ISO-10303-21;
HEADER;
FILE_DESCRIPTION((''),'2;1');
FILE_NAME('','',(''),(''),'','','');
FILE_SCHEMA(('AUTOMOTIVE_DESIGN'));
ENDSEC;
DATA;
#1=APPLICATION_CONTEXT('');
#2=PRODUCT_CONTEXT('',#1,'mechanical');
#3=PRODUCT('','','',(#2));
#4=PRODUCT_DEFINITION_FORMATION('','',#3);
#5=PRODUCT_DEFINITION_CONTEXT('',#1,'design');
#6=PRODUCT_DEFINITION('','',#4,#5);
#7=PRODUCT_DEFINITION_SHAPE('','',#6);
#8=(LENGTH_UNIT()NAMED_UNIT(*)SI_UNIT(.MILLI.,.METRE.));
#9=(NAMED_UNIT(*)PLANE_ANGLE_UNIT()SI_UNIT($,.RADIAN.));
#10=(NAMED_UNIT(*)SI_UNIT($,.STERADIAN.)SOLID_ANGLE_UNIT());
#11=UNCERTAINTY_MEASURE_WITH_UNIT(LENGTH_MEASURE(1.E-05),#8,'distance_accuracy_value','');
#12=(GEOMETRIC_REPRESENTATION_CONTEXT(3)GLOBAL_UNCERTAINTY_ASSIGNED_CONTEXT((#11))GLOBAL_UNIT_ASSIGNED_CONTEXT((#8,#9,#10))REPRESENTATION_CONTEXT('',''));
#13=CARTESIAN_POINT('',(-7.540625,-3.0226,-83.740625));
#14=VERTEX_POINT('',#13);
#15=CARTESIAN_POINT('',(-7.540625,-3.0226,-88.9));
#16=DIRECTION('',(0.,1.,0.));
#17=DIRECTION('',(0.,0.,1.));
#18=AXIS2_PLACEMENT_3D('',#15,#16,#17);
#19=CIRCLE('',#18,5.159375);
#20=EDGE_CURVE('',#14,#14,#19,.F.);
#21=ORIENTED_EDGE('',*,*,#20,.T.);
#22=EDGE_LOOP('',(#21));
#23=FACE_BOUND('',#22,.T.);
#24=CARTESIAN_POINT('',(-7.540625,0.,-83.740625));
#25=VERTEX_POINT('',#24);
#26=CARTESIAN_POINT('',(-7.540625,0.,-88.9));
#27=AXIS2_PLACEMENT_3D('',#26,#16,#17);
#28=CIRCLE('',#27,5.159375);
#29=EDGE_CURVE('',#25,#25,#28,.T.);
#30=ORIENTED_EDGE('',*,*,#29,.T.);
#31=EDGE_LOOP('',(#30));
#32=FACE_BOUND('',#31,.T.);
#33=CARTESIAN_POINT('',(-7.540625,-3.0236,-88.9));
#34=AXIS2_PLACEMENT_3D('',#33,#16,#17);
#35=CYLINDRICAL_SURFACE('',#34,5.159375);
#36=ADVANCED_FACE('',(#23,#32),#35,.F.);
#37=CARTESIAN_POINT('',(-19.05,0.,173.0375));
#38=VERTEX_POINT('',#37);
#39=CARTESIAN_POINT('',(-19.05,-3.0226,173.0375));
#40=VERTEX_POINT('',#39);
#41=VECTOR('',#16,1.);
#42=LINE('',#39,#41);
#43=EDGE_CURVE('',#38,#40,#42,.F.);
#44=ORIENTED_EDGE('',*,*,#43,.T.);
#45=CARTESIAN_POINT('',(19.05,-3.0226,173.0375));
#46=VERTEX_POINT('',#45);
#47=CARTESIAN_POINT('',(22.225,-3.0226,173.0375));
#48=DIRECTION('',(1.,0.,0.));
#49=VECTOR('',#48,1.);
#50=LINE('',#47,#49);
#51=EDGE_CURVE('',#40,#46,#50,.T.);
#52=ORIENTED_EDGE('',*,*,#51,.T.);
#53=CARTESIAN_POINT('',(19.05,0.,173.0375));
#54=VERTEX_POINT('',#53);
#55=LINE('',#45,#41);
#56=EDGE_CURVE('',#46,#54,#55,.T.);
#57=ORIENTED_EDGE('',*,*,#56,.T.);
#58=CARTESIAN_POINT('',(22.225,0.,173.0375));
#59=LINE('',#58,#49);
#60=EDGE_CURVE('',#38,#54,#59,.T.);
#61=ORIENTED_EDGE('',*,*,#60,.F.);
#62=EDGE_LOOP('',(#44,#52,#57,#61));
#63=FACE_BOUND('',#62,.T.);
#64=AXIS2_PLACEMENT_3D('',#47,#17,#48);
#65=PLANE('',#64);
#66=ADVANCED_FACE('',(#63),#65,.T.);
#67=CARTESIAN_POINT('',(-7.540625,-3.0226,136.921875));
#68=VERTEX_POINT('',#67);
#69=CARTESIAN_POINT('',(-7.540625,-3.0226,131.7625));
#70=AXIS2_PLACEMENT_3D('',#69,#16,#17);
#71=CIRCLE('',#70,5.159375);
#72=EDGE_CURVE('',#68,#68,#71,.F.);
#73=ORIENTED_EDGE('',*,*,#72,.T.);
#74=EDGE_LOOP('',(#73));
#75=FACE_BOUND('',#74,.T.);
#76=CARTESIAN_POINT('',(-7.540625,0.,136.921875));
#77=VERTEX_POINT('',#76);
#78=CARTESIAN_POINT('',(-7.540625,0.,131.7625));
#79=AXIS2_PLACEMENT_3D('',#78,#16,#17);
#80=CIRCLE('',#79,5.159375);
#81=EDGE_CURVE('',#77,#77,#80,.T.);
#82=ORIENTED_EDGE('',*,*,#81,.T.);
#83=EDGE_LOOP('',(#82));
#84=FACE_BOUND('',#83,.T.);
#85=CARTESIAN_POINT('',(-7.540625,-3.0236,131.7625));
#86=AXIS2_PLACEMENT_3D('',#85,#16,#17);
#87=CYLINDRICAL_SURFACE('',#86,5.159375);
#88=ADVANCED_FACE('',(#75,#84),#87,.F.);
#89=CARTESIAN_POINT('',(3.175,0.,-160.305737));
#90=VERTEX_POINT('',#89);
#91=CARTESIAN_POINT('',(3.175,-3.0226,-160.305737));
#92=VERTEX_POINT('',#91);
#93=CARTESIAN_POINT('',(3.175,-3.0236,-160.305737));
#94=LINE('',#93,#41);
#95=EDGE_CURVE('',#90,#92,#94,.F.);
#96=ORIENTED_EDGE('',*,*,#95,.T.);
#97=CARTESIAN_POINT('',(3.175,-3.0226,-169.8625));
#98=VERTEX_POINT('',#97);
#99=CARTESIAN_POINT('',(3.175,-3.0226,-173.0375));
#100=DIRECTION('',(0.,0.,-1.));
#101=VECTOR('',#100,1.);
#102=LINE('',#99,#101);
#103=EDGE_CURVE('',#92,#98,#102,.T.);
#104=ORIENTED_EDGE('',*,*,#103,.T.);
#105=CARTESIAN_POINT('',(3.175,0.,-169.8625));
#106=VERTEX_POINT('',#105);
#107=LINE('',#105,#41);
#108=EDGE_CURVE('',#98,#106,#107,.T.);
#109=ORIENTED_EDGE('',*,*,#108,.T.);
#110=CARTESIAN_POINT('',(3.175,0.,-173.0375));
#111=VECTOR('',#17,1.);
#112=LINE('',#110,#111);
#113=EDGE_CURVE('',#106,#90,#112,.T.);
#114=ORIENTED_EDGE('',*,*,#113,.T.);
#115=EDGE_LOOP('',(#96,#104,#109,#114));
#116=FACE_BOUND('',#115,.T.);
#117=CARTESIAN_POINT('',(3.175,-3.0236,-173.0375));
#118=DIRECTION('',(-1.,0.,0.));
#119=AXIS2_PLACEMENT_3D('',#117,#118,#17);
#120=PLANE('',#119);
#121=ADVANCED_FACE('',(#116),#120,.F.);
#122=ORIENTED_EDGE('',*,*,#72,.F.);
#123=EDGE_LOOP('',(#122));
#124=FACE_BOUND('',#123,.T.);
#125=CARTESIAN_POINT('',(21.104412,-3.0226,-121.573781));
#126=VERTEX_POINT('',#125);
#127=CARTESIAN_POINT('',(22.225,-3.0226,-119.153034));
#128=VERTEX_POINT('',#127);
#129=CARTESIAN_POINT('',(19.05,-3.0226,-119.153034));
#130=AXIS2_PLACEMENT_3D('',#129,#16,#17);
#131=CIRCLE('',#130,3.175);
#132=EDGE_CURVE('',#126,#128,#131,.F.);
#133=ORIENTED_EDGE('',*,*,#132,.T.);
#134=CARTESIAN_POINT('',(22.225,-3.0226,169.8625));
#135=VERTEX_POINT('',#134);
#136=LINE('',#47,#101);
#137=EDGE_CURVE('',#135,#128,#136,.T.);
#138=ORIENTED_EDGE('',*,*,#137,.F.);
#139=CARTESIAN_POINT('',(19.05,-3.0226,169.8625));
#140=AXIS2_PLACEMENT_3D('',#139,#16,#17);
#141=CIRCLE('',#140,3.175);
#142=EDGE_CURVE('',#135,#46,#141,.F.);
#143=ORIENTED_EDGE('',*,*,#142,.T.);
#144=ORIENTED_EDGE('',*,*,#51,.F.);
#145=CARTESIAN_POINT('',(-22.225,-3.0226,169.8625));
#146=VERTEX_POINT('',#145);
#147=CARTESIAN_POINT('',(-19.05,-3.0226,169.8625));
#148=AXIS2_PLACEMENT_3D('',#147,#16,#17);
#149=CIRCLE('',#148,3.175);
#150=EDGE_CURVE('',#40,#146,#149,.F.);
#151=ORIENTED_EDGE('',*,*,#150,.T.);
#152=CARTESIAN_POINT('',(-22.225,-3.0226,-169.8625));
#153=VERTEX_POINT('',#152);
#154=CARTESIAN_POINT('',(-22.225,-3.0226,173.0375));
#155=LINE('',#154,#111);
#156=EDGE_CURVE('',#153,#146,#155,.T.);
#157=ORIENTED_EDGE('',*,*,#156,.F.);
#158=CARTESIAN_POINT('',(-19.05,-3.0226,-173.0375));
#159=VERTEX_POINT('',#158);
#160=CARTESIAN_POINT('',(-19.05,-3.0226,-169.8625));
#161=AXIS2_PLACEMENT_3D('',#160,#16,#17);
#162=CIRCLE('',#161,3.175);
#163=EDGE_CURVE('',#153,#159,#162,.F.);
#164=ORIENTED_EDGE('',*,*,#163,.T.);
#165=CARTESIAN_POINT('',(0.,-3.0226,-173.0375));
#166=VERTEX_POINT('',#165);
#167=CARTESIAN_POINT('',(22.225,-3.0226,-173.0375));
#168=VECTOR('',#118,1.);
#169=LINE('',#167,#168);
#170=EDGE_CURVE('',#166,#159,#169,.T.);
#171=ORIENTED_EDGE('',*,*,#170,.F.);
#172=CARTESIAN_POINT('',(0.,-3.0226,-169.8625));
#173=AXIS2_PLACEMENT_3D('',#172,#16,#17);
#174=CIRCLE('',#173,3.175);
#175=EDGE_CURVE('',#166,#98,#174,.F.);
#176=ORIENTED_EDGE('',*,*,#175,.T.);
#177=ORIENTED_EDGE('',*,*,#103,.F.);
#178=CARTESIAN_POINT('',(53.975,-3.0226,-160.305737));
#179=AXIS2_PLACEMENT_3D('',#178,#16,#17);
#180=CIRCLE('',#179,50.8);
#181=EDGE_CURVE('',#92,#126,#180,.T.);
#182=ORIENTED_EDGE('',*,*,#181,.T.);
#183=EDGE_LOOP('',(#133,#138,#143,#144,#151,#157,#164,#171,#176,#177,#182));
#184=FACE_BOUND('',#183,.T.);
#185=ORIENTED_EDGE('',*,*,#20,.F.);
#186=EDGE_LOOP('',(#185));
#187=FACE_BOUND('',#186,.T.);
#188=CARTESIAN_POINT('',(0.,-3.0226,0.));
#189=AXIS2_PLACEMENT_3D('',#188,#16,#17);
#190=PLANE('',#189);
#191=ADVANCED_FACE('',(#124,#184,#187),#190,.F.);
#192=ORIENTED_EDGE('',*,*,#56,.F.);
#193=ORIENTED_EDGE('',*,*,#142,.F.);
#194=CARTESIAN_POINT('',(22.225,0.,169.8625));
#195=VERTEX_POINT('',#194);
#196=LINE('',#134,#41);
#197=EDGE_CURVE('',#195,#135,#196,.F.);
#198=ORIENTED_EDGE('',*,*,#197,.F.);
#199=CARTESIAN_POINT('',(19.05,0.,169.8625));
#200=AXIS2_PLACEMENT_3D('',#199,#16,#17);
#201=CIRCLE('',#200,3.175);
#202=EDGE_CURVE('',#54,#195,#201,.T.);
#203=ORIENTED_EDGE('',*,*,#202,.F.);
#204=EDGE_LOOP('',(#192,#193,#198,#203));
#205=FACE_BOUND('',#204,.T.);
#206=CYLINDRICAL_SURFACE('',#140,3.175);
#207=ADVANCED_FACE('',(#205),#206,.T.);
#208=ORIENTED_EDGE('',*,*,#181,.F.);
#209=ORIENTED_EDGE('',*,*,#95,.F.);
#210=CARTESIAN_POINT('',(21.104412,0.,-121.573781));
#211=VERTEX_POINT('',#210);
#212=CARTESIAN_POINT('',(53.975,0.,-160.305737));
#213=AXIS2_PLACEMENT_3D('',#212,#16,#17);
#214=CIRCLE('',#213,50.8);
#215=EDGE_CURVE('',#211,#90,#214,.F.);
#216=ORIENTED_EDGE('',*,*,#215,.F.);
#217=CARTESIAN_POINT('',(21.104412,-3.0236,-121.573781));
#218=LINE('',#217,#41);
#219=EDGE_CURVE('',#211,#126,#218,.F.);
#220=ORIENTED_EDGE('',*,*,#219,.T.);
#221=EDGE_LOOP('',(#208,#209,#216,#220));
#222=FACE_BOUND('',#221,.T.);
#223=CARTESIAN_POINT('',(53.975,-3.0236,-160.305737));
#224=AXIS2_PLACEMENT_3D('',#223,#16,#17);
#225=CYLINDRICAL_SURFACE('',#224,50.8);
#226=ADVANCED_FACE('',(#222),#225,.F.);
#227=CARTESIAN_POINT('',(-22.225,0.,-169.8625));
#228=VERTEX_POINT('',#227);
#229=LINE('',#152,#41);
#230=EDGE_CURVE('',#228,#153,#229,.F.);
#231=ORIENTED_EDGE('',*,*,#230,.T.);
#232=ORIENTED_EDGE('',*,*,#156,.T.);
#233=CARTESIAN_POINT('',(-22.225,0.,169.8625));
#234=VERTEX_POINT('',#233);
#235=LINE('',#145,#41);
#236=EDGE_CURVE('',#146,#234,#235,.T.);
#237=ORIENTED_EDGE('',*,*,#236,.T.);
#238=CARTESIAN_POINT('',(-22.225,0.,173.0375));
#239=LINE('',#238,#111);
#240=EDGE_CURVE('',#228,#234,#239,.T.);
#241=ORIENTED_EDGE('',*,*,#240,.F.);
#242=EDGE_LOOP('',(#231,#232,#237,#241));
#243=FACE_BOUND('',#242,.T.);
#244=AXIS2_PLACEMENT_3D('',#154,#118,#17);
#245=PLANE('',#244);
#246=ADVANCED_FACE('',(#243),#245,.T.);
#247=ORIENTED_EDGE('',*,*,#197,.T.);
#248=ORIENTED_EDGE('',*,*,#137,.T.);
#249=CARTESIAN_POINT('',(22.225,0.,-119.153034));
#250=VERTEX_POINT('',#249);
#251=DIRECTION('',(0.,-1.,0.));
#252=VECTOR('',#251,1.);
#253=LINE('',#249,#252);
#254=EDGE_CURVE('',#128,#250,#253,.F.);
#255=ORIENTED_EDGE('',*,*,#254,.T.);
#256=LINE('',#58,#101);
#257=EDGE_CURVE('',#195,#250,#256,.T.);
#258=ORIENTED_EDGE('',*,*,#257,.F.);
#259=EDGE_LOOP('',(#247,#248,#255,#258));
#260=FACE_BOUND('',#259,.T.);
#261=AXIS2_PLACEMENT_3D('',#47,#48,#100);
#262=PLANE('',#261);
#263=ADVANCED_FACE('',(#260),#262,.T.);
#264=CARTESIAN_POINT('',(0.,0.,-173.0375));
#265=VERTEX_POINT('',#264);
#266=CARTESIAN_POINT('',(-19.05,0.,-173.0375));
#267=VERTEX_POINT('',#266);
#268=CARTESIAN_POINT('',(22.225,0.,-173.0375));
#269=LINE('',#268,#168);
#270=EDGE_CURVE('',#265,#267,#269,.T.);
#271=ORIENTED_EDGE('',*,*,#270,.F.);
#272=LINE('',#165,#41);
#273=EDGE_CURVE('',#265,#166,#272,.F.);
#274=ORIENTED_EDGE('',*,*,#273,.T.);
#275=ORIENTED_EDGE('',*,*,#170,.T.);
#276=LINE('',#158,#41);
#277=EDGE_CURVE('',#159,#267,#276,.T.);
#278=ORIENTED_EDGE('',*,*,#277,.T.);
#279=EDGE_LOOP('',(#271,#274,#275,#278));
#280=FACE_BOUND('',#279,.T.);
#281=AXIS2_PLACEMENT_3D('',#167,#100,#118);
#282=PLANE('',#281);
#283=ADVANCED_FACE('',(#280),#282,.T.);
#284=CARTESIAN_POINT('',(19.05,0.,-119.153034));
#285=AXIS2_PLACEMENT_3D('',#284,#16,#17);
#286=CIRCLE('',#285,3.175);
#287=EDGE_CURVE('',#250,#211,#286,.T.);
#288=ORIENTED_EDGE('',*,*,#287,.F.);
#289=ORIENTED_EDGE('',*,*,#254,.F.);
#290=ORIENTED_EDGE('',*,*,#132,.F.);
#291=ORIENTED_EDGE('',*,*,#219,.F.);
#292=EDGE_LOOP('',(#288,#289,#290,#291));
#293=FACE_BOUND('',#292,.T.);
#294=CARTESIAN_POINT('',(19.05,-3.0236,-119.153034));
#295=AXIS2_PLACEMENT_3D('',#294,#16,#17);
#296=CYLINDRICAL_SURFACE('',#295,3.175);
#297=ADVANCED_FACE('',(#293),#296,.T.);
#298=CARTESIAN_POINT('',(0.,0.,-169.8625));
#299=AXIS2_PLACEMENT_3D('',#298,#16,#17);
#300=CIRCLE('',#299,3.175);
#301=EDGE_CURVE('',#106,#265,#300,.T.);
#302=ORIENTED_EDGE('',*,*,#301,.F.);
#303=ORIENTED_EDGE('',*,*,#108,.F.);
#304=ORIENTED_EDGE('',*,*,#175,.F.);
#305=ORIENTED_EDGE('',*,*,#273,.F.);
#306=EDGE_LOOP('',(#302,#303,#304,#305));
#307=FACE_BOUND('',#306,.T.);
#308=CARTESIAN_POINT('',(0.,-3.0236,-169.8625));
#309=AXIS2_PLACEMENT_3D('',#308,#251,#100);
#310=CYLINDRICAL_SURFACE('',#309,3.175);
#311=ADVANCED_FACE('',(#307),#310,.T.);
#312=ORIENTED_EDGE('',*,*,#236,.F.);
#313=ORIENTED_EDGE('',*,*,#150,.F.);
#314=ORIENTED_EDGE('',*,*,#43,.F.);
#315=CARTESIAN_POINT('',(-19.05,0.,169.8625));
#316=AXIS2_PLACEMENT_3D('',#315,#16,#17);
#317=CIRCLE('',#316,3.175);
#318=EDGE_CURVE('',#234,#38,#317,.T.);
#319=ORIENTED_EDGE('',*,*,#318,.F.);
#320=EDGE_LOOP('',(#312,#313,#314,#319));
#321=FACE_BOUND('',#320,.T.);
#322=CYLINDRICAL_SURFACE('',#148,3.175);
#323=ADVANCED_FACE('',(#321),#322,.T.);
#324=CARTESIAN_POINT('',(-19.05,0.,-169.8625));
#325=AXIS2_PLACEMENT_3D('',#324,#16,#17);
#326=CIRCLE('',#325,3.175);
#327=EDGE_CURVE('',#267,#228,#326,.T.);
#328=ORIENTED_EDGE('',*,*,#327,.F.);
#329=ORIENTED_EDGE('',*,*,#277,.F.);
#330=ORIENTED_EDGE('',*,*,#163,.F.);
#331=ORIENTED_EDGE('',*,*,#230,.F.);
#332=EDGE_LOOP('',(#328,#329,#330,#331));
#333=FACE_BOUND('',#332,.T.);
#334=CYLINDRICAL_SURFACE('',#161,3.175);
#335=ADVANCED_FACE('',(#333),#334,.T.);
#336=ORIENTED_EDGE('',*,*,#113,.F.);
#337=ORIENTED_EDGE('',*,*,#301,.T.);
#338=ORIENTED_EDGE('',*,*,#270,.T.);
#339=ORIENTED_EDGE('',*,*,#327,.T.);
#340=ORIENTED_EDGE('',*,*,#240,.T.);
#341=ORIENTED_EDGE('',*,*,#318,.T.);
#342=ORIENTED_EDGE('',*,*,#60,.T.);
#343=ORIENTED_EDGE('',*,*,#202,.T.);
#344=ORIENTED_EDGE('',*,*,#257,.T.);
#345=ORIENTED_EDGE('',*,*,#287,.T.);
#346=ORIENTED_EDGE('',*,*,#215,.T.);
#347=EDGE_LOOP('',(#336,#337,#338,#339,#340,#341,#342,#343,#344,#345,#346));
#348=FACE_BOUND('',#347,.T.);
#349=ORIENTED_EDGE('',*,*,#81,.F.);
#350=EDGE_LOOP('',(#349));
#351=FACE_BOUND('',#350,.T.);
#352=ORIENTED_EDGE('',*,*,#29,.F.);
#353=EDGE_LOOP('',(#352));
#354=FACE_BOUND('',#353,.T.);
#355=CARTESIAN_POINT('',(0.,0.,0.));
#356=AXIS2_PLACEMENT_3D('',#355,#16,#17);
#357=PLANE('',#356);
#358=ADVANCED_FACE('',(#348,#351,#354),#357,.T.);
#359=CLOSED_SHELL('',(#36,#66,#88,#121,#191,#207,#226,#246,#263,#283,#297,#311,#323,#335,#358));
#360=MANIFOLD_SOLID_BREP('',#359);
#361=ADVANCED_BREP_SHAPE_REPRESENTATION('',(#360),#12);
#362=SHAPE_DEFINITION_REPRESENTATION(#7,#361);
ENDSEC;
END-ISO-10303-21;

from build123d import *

# Parameters (mm, degrees)
SKETCH1_W          = 44.45
SKETCH1_H          = 346.075
BASE_FLANGE1_DEPTH = 3.0226
CUT_EXTRUDE1_REACH = 176.485
SKETCH6_R          = 5.159375
SKETCH6_W          = 19.05
SKETCH6_H          = 52.3875
FILLET2_R          = 50.8
FILLET3_R          = 3.175


# Sheet-metal steps are written as plain solids
with BuildPart() as part:
    # Sketch1 → Base-Flange1 (new body)
    with BuildSketch(Plane(origin=(0, 0, 0), x_dir=(1, 0, 0), z_dir=(0, 1, 0))):
        Rectangle(SKETCH1_W, SKETCH1_H)
    extrude(amount=-BASE_FLANGE1_DEPTH)

    # Sketch6 → Cut-Extrude1 (cut, up to next)
    with BuildSketch(Plane(origin=(0, 0, 0), x_dir=(1, 0, 0), z_dir=(0, 1, 0)), mode=Mode.PRIVATE) as cut_extrude1_sk1:
        with Locations(Location((-7.540625, -131.7625, 0), (0, 0, 270))):
            Circle(SKETCH6_R)
    cut_extrude1_tool1 = extrude(cut_extrude1_sk1.sketch, amount=-CUT_EXTRUDE1_REACH, mode=Mode.PRIVATE) & part.part
    # Sketch6 → Cut-Extrude1 (cut, up to next)
    with BuildSketch(Plane(origin=(0, 0, 0), x_dir=(1, 0, 0), z_dir=(0, 1, 0)), mode=Mode.PRIVATE) as cut_extrude1_sk2:
        with Locations(Location((-7.540625, 88.9, 0), (0, 0, 270))):
            Circle(SKETCH6_R)
    cut_extrude1_tool2 = extrude(cut_extrude1_sk2.sketch, amount=-CUT_EXTRUDE1_REACH, mode=Mode.PRIVATE) & part.part
    # Sketch6 → Cut-Extrude1 (cut, up to next)
    with BuildSketch(Plane(origin=(0, 0, 0), x_dir=(1, 0, 0), z_dir=(0, 1, 0)), mode=Mode.PRIVATE) as cut_extrude1_sk3:
        with Locations((12.7, 146.84375)):
            Rectangle(SKETCH6_W, SKETCH6_H)
    cut_extrude1_tool3 = extrude(cut_extrude1_sk3.sketch, amount=-CUT_EXTRUDE1_REACH, mode=Mode.PRIVATE) & part.part
    add(cut_extrude1_tool1.solids().sort_by_distance((-7.540625, 0, 131.7625))[0], mode=Mode.SUBTRACT)
    add(cut_extrude1_tool2.solids().sort_by_distance((-7.540625, 0, -88.9))[0], mode=Mode.SUBTRACT)
    add(cut_extrude1_tool3.solids().sort_by_distance((12.7, 0, -146.84375))[0], mode=Mode.SUBTRACT)

    # Fillet2
    # the kernel refuses this fillet: 50.8 mm, written as the material it adds along each edge
    with BuildSketch(Plane(origin=(3.175, 0, -120.65), x_dir=(1, 0, 0), z_dir=(0, -1, 0))) as fillet2_piece_1:
        with BuildLine():
            CenterArc((50.8, -39.65573729), FILLET2_R, 128.682187453, 51.317812547)
            Line((0, -39.65573729), (-1.016, -39.65573729))
            Line((-1.016, -39.65573729), (-1.016, 0))
            Line((-1.016, 0), (0, 1.016))
            ThreePointArc((0, 1.016), (9.525, 1.016), (18.415, 0.793114746))
            Line((18.415, 0.793114746), (19.05, 0))
        make_face()
    extrude(amount=3.0226)

    # Fillet3
    fillet3_edges = [part.edges().sort_by_distance(p)[0] for p in [
        (22.225, -1.5113, -120.65),
        (3.175, -1.5113, -173.0375),
        (-22.225, -1.5113, -173.0375),
        (22.225, -1.5113, 173.0375),
        (-22.225, -1.5113, 173.0375),
    ]]
    fillet(fillet3_edges, radius=FILLET3_R)


solid = part.part
